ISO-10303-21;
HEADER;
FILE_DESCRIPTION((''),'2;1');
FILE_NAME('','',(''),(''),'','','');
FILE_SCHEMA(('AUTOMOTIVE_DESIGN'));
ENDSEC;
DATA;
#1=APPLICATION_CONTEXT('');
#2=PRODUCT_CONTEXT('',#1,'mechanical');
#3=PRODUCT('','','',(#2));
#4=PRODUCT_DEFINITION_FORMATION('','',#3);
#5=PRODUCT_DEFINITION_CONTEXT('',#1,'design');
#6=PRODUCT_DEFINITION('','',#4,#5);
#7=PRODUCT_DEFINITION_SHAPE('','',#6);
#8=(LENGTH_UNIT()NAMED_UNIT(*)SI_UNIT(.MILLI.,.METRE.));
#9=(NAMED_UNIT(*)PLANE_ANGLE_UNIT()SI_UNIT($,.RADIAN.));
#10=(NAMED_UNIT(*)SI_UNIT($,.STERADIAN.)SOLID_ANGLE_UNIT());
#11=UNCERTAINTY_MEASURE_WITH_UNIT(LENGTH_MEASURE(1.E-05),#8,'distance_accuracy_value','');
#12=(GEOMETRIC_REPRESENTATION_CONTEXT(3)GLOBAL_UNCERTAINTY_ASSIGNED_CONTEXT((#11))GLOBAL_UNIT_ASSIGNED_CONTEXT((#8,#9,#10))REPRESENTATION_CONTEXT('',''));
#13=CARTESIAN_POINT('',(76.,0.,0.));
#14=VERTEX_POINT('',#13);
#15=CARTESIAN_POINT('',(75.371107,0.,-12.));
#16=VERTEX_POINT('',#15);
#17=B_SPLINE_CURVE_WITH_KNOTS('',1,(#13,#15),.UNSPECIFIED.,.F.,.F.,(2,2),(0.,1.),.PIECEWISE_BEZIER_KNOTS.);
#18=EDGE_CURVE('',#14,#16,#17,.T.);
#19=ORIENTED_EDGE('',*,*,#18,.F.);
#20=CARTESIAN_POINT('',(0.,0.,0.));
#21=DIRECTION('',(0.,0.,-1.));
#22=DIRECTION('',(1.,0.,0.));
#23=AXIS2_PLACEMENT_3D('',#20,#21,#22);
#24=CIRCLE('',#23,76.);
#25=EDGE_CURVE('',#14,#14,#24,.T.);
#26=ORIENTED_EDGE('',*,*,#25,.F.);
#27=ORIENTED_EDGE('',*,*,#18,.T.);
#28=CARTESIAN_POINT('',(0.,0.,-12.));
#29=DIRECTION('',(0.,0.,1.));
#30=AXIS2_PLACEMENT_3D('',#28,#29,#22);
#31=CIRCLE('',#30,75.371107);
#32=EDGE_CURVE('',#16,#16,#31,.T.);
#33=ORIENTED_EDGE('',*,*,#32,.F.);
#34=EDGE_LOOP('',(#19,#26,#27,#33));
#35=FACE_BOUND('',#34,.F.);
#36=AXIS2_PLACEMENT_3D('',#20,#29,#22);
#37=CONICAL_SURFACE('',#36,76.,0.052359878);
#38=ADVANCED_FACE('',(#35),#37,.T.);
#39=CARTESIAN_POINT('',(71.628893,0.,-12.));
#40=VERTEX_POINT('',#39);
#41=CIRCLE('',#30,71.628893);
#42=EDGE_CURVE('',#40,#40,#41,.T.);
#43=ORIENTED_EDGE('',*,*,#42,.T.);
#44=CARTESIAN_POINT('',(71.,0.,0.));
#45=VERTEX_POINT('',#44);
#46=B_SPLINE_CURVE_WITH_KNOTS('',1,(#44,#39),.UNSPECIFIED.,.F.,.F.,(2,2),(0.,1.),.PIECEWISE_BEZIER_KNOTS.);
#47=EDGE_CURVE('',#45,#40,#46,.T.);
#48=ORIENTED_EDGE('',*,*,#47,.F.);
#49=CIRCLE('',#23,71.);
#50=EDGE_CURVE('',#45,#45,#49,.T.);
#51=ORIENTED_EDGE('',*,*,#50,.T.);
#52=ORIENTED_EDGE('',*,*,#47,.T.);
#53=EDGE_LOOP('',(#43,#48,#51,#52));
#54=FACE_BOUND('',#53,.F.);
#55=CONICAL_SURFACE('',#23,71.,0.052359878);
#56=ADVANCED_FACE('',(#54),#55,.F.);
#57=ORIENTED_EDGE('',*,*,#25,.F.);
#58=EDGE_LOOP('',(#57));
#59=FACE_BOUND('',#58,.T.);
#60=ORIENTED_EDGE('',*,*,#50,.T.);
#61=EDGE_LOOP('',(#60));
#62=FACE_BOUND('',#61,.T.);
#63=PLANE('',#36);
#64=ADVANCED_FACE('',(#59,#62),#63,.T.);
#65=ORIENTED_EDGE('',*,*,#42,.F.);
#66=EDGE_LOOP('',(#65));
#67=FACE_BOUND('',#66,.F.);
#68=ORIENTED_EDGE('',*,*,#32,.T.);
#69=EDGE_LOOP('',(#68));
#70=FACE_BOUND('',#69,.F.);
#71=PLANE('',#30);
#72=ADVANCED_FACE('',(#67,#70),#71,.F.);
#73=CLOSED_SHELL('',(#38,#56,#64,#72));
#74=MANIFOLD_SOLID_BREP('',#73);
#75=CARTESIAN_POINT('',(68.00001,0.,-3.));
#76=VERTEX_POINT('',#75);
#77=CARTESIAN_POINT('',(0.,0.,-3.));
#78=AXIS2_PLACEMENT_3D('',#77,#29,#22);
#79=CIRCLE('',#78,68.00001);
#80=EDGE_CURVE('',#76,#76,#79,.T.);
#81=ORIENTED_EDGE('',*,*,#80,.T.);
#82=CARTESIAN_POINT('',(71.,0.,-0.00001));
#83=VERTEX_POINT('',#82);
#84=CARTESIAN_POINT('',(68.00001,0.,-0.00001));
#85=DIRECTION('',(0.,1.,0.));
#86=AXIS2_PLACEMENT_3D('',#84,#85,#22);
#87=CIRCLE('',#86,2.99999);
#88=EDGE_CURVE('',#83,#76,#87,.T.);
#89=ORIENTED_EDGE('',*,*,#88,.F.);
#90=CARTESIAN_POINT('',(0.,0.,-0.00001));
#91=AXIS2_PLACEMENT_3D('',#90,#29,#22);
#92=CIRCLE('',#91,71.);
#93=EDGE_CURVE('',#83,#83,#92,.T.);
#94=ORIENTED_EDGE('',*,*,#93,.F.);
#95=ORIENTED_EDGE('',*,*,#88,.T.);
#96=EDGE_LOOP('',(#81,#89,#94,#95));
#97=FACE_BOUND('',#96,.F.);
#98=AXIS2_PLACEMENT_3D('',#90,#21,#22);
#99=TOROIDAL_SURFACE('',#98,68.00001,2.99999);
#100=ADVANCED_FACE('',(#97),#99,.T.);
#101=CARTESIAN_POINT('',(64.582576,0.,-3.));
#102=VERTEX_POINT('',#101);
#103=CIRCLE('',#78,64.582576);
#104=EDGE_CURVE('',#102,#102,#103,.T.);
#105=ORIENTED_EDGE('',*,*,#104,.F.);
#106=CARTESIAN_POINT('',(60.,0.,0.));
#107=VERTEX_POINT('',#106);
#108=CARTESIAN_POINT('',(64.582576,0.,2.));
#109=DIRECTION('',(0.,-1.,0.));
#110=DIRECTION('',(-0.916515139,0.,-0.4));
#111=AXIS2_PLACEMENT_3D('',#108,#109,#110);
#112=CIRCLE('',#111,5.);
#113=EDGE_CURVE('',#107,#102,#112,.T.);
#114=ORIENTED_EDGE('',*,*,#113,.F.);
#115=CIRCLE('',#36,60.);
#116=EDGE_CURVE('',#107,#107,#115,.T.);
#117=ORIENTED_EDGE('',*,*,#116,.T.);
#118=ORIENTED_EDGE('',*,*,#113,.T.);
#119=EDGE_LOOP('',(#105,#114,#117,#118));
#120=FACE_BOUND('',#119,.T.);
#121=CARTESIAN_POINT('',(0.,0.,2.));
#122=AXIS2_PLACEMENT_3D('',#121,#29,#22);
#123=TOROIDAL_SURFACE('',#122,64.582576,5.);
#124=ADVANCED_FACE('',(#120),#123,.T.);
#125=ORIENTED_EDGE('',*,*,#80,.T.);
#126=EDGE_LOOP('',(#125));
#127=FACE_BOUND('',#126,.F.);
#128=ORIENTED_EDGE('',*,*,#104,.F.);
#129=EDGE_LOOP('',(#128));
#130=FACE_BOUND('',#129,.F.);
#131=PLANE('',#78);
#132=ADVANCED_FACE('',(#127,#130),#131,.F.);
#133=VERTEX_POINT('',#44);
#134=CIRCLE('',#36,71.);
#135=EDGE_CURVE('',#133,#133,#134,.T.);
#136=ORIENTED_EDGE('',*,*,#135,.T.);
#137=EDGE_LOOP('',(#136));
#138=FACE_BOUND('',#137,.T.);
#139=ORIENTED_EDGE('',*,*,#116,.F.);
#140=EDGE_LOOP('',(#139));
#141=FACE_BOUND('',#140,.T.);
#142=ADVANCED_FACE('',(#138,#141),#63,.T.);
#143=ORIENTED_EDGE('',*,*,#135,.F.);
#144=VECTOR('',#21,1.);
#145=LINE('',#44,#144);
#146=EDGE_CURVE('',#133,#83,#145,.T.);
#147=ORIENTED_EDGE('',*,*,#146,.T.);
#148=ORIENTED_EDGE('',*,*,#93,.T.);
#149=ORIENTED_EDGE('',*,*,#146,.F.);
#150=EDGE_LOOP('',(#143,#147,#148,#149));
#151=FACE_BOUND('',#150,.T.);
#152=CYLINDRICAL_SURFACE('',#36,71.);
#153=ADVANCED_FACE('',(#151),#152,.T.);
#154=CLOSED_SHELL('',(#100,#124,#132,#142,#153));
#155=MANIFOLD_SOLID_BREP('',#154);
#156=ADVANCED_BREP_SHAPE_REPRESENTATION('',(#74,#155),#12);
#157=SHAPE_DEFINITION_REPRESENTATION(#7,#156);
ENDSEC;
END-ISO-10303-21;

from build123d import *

# Parameters (mm, degrees)
F0_R     = 76
F0_R_2   = 71
F1_DEPTH = 12
F1_TAPER = 3
F0_R_3   = 65
F0_R_4   = 60
F2_DEPTH = 3
F6_R     = 2.99999


# Not quite as in the source:
# - a fillet or chamfer that OpenCascade refuses, or shapes differently, is made with other operations: its cross-section is extruded or revolved along the edge and cut away or added
# - a fillet or chamfer is up to 0.001 mm smaller than in the source, because OpenCascade refuses the exact size


with BuildPart() as f1:
    # F0 (on Top) → F1 (new body)
    with BuildSketch(Plane.XY):
        Circle(F0_R)
        Circle(F0_R_2, mode=Mode.SUBTRACT)
    extrude(amount=-F1_DEPTH, taper=F1_TAPER)


with BuildPart() as f2:
    # F0 (on Top) → F2 (new body)
    with BuildSketch(Plane.XY):
        Circle(F0_R_2)
        Circle(F0_R_3, mode=Mode.SUBTRACT)
        Circle(F0_R_3)
        Circle(F0_R_4, mode=Mode.SUBTRACT)
    extrude(amount=-F2_DEPTH)

    # F5: fillet of radius 5 on 1 edges, made by hand

    # F5_s1 → F5_t2 (revolve, cut)
    with BuildSketch(Plane.XZ):
        with BuildLine():
            ThreePointArc((60, 0), (61.8439629074, -2.1833001327), (64.582575695, -3))
            Line((64.582575695, -3), (60, -3))
            Line((60, -3), (60, 0))
        make_face()
    revolve(axis=Axis((0, 0, -3), (0, 0, 1)), mode=Mode.SUBTRACT)

    # F6 (radius 3 in the source; OpenCascade refuses exactly that, so slightly less here)
    f6_edges = [f2.edges().sort_by_distance(p)[0] for p in [
        (-71, 0, -3),
    ]]
    fillet(f6_edges, radius=F6_R)


solid = Compound([f1.part, f2.part])
